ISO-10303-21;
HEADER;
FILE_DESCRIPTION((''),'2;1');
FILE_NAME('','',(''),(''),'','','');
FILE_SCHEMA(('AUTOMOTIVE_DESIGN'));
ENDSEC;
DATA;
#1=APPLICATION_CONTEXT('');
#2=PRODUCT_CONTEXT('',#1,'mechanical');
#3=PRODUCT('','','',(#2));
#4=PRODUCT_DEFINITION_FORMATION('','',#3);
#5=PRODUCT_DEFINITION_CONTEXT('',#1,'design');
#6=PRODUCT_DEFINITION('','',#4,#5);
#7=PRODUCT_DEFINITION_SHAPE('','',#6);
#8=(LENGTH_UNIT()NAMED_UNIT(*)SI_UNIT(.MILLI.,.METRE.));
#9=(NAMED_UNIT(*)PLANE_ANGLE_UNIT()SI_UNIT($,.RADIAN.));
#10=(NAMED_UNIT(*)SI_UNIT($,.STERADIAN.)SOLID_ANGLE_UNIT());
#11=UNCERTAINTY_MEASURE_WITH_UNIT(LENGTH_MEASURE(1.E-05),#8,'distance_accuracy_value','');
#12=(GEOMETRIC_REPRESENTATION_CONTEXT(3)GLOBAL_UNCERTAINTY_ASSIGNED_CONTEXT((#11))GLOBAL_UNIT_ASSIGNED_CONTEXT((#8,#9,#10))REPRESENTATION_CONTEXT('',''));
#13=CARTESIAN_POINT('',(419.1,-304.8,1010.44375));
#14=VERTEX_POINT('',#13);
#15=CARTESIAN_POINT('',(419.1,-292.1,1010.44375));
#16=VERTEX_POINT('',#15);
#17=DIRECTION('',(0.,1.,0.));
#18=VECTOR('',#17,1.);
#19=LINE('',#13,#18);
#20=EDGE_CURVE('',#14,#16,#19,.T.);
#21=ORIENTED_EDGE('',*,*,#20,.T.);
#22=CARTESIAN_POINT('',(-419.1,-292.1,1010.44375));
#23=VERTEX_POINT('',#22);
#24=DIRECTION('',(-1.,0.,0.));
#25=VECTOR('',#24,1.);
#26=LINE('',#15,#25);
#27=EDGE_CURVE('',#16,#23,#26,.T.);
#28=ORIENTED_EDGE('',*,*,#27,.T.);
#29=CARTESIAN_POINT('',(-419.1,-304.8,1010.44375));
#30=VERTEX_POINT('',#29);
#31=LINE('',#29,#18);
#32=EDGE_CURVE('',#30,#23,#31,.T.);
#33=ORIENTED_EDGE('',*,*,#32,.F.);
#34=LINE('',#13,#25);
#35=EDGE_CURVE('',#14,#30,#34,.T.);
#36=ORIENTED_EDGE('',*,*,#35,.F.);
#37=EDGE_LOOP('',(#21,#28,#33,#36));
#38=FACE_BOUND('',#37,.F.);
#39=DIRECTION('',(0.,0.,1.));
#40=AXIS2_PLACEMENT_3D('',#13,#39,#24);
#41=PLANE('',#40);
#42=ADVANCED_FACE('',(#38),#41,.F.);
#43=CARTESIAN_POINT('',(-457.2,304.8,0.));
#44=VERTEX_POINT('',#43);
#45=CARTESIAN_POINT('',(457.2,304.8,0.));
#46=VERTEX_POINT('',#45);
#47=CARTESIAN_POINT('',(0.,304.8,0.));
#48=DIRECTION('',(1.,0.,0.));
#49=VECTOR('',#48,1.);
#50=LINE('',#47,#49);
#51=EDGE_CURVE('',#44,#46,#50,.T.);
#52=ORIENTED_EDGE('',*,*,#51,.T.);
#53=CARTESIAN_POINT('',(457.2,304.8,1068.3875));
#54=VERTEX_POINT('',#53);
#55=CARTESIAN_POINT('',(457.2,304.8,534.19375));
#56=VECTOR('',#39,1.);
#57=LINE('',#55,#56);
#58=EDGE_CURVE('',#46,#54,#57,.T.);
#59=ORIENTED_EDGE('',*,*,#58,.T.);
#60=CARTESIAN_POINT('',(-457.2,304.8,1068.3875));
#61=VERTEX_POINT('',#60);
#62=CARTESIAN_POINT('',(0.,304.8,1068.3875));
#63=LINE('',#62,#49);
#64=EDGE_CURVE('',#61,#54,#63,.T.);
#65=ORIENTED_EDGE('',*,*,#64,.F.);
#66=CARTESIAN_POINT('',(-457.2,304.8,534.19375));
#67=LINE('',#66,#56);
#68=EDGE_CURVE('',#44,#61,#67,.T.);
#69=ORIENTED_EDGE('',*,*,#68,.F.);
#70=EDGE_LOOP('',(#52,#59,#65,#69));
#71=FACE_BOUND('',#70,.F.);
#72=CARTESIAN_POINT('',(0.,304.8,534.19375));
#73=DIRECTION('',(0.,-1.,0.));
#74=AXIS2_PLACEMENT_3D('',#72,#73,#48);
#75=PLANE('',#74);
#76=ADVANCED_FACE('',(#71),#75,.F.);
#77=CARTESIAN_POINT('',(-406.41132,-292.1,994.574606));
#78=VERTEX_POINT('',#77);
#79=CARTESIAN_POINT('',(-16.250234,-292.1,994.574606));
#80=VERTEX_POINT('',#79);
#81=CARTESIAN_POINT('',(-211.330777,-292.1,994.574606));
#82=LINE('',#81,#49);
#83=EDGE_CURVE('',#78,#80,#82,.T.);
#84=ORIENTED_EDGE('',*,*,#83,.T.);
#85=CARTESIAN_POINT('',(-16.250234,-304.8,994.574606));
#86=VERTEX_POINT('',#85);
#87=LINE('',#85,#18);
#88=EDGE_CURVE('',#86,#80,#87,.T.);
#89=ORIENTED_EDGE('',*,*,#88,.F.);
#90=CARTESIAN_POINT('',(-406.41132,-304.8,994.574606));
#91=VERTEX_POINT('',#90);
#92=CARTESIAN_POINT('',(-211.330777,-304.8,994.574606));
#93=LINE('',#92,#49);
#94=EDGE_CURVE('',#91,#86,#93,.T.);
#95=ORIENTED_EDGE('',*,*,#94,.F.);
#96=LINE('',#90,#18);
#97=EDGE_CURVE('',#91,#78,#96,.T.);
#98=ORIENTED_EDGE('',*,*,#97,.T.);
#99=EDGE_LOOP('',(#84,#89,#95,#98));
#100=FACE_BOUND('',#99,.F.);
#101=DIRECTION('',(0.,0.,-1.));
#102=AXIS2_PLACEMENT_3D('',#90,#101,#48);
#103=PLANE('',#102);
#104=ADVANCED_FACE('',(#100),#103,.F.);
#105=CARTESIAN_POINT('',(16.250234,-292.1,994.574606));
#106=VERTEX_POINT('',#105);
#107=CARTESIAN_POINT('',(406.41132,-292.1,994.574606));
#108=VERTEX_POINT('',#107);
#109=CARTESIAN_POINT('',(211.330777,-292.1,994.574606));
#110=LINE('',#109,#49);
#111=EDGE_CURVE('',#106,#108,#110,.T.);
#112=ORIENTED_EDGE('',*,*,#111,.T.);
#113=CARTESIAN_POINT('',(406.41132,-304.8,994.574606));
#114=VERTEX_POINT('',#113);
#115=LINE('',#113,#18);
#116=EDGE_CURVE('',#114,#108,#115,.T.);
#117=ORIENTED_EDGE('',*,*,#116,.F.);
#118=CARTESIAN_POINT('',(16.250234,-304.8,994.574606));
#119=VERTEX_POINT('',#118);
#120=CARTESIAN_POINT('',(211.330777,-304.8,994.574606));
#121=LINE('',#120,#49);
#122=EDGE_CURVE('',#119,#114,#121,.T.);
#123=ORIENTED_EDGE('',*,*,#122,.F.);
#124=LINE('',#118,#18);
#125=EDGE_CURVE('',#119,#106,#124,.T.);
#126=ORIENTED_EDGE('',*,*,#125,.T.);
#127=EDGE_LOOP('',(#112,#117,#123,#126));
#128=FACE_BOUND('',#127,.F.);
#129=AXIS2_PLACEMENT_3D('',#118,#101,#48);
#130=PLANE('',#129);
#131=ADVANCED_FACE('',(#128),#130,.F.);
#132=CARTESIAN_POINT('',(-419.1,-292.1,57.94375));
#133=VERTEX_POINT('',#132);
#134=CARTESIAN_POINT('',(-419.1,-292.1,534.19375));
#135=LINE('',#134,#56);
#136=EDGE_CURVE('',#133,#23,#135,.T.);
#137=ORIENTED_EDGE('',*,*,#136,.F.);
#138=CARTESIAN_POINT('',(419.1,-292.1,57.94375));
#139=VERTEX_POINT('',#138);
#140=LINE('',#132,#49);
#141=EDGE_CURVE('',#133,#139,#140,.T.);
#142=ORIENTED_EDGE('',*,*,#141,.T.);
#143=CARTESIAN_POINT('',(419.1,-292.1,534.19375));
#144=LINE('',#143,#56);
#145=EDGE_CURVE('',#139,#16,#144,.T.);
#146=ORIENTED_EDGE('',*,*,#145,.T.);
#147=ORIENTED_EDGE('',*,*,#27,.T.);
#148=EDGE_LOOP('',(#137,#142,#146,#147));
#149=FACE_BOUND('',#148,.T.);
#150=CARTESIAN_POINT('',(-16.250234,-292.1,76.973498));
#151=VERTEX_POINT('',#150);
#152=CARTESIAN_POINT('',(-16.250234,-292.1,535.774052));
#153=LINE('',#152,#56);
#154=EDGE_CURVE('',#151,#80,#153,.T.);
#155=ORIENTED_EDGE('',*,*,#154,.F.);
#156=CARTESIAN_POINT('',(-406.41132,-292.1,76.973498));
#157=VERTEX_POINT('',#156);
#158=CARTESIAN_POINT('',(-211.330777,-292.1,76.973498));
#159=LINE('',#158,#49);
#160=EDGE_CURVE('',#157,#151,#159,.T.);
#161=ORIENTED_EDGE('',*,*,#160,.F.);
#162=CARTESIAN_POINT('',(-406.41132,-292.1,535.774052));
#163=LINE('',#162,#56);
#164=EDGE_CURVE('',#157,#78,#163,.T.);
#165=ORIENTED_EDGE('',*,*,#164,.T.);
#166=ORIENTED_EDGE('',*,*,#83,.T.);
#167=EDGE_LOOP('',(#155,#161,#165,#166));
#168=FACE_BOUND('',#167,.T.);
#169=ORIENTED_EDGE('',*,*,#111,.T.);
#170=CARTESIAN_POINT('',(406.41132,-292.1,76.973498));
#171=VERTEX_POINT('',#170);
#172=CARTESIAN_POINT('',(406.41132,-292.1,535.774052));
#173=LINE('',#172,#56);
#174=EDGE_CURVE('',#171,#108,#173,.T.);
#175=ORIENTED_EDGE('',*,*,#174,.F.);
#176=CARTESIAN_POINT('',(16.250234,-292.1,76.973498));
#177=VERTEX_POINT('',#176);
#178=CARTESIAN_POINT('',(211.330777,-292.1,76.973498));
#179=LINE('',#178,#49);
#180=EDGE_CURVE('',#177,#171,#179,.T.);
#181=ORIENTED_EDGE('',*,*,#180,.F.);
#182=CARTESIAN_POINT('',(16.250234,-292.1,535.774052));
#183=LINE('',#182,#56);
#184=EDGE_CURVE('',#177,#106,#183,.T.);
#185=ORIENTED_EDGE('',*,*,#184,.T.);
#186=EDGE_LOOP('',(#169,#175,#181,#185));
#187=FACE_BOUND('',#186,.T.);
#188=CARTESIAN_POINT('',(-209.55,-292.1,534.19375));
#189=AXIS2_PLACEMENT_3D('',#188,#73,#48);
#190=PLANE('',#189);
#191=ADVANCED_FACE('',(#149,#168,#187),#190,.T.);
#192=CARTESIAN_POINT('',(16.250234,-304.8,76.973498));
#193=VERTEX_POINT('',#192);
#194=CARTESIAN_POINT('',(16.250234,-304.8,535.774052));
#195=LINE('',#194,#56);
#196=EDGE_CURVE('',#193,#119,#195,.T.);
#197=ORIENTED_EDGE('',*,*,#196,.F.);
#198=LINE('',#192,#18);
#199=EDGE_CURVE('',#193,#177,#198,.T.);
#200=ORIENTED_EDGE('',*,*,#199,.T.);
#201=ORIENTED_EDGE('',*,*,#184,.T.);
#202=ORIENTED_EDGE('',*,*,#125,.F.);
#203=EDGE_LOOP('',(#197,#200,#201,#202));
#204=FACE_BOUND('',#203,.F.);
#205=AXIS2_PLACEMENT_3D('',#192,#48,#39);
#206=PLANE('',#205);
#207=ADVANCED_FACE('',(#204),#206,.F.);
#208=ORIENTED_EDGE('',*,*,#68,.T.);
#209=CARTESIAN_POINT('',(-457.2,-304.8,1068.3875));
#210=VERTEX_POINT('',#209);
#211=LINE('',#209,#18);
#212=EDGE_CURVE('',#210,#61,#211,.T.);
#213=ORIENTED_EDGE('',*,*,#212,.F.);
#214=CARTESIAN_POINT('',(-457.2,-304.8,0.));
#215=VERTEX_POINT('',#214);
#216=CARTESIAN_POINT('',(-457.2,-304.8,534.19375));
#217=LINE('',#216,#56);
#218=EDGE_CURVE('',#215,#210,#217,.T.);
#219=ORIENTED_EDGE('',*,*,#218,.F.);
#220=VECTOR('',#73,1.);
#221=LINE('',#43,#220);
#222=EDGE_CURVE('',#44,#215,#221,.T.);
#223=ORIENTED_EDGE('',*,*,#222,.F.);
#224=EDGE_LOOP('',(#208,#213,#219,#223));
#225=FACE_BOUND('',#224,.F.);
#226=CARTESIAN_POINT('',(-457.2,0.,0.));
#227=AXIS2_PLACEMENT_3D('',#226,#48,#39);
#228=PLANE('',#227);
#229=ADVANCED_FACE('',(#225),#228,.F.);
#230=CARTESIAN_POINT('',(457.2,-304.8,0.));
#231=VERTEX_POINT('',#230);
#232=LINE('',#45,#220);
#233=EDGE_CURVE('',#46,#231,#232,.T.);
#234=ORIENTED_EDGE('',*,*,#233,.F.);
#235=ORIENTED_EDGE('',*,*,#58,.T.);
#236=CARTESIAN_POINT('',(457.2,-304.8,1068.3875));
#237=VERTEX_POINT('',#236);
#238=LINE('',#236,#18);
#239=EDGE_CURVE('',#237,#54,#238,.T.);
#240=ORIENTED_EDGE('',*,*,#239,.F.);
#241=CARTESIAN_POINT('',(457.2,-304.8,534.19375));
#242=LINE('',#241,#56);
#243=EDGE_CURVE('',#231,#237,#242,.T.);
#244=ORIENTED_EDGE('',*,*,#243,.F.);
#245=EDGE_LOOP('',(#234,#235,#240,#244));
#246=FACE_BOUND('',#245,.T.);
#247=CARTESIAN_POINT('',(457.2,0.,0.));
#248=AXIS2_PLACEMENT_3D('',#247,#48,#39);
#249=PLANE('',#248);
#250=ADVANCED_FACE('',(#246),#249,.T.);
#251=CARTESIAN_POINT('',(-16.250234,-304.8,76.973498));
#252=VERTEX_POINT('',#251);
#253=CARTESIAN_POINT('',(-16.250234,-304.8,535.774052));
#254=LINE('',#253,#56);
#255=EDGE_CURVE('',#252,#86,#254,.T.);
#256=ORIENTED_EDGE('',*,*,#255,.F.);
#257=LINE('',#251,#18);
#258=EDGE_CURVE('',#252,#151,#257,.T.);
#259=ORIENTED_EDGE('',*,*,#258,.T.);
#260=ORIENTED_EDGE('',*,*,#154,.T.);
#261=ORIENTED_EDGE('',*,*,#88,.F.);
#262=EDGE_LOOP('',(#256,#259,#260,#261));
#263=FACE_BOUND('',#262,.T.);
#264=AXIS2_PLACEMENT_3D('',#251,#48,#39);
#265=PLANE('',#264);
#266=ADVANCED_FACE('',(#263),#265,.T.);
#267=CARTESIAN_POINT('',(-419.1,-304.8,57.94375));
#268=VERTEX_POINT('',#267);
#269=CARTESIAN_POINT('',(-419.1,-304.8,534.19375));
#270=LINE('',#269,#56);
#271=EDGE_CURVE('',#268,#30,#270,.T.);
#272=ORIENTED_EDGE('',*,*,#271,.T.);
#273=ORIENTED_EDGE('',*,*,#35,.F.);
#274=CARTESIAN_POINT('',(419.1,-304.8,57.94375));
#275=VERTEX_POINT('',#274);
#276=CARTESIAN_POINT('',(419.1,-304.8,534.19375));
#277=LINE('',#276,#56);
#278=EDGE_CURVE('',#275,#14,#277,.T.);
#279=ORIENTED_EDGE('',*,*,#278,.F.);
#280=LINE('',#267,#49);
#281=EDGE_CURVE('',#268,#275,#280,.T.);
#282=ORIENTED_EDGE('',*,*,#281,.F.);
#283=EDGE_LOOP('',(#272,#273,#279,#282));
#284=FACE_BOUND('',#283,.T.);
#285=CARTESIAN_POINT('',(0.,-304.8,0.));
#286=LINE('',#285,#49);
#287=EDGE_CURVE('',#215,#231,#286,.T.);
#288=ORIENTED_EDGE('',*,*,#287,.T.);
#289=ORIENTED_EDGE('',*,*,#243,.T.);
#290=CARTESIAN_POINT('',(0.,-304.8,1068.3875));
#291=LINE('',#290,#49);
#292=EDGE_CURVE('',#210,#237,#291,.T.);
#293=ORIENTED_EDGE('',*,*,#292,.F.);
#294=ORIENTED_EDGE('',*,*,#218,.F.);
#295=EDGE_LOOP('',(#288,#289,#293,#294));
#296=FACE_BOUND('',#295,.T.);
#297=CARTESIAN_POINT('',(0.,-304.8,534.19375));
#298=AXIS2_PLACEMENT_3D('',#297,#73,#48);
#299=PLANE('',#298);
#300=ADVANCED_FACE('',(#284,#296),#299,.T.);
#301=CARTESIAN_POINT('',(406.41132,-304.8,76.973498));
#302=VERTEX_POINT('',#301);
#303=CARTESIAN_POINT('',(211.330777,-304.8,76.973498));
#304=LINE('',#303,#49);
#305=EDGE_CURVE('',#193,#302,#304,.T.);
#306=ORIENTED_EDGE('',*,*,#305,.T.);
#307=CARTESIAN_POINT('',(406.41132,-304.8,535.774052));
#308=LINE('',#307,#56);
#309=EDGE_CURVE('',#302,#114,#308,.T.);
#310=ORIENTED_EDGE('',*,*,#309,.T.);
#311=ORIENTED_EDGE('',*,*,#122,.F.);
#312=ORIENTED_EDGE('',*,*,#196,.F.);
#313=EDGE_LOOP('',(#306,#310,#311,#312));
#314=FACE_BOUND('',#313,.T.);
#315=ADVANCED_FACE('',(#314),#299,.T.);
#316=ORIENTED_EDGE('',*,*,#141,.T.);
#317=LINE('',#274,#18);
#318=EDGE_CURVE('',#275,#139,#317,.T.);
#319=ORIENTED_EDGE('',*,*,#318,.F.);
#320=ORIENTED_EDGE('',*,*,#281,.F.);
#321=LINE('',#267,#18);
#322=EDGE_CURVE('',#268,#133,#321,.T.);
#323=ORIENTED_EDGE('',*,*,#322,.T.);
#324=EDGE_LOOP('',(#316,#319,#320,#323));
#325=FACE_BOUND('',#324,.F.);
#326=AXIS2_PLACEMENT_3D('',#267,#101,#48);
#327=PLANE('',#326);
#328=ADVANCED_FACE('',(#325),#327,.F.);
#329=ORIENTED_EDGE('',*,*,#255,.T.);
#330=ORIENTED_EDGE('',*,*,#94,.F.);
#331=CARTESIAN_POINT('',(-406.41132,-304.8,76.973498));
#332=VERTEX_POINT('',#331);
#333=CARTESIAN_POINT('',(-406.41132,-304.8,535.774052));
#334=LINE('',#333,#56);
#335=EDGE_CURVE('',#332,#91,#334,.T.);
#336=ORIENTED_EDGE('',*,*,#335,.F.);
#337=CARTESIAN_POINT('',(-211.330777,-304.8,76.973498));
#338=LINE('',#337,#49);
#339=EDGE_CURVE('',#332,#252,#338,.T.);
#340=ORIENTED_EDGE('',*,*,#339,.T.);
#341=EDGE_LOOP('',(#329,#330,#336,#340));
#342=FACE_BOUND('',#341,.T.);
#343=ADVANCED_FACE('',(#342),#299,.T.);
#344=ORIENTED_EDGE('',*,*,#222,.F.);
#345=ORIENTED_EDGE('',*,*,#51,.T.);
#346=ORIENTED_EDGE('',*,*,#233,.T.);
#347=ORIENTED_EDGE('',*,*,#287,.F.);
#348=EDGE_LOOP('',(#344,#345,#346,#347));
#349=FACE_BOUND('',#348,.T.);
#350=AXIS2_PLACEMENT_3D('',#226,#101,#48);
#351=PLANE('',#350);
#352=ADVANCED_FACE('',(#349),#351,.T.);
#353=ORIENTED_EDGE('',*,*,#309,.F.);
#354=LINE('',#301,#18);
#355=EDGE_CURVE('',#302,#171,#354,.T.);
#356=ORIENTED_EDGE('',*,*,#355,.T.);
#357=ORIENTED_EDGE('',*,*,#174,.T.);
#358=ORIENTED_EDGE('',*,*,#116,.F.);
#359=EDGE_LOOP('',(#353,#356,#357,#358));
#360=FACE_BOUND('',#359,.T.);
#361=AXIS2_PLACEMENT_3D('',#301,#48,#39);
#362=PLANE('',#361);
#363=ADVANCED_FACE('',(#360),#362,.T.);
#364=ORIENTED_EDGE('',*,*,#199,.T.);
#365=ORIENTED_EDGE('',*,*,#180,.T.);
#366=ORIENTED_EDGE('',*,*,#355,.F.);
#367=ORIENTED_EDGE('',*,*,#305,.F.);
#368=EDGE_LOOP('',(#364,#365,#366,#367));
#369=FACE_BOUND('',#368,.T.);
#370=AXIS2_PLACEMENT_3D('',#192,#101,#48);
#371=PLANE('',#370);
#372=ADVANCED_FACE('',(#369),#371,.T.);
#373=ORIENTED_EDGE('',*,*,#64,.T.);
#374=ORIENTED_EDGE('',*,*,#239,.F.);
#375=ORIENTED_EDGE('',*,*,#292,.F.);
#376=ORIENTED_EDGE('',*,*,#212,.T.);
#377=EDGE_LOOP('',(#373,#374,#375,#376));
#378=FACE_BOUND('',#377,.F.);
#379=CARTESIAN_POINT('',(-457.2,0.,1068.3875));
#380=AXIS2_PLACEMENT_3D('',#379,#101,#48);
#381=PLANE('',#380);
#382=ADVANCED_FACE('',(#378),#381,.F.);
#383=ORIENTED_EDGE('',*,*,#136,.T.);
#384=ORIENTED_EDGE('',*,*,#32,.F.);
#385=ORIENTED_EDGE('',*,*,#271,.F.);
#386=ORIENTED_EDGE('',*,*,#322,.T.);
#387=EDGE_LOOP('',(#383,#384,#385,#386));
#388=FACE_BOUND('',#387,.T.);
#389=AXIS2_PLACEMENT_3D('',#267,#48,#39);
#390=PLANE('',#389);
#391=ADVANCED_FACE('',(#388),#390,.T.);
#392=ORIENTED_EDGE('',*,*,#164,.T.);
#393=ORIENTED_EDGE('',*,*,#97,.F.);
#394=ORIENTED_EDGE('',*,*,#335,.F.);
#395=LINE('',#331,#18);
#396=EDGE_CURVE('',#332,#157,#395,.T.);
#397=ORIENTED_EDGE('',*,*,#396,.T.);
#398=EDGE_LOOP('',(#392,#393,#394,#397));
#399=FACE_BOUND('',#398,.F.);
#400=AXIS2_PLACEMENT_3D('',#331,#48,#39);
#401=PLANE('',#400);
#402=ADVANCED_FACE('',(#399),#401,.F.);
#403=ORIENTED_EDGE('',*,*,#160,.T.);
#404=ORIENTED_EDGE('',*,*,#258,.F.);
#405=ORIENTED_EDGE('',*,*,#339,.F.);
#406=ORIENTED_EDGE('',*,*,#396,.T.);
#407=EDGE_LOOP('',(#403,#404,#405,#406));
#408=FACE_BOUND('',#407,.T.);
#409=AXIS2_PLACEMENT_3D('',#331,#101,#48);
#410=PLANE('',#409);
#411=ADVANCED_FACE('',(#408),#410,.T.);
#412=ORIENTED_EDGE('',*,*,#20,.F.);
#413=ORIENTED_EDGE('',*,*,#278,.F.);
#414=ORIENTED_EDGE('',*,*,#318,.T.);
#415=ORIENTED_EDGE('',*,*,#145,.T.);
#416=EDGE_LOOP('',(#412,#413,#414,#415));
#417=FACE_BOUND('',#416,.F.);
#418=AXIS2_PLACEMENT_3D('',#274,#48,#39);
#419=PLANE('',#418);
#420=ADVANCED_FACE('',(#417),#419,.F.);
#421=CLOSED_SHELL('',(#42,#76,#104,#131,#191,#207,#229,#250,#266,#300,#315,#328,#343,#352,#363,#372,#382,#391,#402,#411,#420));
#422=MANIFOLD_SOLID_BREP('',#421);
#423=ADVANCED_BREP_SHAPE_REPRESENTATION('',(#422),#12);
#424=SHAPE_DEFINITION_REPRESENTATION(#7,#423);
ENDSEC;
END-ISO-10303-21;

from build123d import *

# Parameters (mm, degrees)
F0_W     = 914.4
F0_H     = 1068.3875
F1_DEPTH = 304.8
F3_W     = 419.1
F3_H     = 952.5
F3_W_2   = 390.1610858738
F3_H_2   = 917.601108551
F5_DEPTH = 12.7


# Not quite as in the source:
# - the program builds the solid bodies; features that only make, move or delete a surface that nothing else refers to are left out


with BuildPart() as f1:
    # F0 (on Front) → F1 (new body, symmetric)
    with BuildSketch(Plane.XZ):
        with Locations((0, 534.19375)):
            Rectangle(F0_W, F0_H)
    extrude(amount=F1_DEPTH, both=True)

    # F3 (on face) → F5 (cut)
    with BuildSketch(Plane.XZ.offset(304.8)):
        with Locations((-209.55, 534.19375)):
            Rectangle(F3_W, F3_H)
        with Locations((-211.3307770342, 535.7740521431)):
            Rectangle(F3_W_2, F3_H_2, mode=Mode.SUBTRACT)
        with Locations((209.55, 534.19375)):
            Rectangle(F3_W, F3_H)
        with Locations((211.3307770342, 535.7740521431)):
            Rectangle(F3_W_2, F3_H_2, mode=Mode.SUBTRACT)
    extrude(amount=-F5_DEPTH, mode=Mode.SUBTRACT)


solid = f1.part
